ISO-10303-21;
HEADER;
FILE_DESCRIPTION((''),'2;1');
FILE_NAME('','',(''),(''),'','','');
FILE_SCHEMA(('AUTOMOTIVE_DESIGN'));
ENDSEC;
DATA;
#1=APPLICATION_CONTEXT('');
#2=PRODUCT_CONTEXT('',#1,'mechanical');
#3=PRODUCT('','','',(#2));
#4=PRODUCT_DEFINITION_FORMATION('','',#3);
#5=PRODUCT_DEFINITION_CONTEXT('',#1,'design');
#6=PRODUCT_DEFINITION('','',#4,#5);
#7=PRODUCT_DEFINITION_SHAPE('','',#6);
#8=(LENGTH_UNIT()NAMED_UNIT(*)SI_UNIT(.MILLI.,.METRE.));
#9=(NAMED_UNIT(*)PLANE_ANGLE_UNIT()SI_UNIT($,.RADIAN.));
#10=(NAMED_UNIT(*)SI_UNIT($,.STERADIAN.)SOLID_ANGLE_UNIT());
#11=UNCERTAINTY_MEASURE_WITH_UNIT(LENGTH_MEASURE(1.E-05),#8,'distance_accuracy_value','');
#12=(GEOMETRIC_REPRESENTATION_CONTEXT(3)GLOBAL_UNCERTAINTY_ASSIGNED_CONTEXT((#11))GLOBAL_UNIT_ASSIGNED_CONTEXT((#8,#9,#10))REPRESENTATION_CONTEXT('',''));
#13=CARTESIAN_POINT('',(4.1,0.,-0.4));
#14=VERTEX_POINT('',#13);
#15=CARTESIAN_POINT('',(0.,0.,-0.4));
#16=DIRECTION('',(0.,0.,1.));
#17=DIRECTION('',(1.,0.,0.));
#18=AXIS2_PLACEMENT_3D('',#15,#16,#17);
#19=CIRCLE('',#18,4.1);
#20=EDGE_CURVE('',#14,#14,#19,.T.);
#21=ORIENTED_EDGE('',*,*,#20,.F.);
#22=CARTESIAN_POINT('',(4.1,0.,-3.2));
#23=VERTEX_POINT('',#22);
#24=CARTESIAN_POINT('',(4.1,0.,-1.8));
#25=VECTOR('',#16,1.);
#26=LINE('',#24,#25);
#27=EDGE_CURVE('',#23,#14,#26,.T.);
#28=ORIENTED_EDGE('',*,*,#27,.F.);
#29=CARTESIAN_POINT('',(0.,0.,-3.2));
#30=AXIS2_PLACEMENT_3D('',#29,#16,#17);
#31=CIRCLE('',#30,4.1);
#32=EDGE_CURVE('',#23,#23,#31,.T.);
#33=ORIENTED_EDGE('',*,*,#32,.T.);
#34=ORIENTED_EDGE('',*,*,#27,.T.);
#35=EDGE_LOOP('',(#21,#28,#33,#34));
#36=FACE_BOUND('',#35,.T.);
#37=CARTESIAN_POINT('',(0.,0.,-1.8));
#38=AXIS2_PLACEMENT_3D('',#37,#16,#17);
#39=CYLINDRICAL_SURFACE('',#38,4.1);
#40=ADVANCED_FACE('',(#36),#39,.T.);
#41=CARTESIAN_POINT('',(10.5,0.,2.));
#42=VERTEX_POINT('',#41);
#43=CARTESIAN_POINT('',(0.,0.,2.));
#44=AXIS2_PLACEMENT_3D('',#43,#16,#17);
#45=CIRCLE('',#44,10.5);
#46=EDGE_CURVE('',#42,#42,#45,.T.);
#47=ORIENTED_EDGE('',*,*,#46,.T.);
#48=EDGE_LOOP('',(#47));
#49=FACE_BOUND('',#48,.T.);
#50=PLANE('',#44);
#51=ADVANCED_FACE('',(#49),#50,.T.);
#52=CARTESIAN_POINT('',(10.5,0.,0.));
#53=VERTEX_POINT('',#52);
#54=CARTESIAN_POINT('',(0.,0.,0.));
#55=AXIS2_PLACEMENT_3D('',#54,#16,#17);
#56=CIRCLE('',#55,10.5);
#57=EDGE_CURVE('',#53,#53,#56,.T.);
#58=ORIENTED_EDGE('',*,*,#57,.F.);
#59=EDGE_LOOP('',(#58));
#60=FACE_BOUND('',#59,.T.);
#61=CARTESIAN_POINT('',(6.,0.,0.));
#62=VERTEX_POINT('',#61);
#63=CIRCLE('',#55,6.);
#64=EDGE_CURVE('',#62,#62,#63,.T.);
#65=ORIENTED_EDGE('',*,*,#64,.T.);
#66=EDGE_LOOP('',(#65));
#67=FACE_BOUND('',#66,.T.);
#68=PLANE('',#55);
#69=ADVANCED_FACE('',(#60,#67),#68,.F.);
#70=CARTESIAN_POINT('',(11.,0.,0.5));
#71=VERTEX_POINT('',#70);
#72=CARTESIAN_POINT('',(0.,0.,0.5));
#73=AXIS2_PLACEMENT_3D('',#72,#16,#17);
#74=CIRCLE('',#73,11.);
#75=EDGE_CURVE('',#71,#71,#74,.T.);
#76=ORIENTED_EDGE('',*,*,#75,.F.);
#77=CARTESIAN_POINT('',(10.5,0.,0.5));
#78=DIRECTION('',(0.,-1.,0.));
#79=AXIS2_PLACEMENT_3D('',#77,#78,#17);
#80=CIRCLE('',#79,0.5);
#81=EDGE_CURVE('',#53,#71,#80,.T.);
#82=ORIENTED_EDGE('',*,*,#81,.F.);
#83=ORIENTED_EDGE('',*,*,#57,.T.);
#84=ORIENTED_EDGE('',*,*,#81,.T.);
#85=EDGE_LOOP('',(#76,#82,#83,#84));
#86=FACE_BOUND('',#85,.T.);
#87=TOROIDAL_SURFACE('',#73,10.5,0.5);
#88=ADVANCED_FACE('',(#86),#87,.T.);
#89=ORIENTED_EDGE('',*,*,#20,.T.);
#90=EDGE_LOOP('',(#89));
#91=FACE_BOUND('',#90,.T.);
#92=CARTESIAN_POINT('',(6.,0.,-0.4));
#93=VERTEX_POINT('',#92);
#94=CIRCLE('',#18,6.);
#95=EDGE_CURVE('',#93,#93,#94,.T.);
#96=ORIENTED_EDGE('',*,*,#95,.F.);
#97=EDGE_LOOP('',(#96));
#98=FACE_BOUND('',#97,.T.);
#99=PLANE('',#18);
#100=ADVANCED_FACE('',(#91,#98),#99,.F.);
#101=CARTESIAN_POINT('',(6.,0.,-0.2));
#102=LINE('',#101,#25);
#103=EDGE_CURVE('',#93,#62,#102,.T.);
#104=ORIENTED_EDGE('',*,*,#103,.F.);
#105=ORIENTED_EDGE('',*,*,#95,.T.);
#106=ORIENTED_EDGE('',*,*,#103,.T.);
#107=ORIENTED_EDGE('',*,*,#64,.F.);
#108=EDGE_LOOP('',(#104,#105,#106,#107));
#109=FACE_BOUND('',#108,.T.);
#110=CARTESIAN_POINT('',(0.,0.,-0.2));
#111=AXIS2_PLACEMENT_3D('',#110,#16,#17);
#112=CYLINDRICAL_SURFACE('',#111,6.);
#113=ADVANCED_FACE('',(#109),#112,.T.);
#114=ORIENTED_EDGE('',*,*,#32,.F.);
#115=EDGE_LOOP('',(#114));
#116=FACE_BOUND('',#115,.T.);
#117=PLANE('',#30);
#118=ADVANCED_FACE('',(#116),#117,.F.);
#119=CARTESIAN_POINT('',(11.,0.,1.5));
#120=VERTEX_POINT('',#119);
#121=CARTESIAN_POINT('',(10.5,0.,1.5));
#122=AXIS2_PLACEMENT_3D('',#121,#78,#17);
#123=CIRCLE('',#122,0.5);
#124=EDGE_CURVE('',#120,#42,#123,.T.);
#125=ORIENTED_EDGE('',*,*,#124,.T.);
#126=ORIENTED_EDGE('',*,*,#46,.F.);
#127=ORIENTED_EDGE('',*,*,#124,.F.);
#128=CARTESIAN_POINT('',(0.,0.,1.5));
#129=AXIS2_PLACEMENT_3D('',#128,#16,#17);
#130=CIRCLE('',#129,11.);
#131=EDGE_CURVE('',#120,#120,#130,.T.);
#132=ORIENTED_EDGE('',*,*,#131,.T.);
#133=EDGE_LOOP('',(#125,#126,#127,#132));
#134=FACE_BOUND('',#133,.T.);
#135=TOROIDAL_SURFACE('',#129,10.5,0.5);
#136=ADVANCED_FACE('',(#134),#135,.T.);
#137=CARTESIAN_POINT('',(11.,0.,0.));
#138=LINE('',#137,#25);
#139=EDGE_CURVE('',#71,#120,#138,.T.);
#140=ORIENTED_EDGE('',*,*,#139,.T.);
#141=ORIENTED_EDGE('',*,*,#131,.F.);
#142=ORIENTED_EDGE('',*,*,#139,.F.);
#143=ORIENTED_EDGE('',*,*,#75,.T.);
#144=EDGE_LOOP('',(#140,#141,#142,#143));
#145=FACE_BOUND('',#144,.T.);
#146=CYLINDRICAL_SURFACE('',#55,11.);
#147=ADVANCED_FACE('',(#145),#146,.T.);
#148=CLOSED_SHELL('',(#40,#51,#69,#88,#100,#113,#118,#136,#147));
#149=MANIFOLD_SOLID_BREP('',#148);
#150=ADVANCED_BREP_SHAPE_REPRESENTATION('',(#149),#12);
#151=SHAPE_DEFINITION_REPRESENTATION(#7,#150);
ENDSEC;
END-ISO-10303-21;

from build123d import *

# Parameters (mm, degrees)
F0_W   = 4.1
F0_H   = 0.4
F0_W_2 = 1.9
F0_H_2 = 2.8
F2_R   = 0.5


with BuildPart() as f1:
    # F0 (on Front) → F1 (revolve)
    with BuildSketch(Plane.XZ):
        Polygon((0, 2), (0, 0), (4.1, 0), (6, 0), (11, 0), (11, 2), align=None)
        with Locations((2.05, -0.2)):
            Rectangle(F0_W, F0_H)
        with Locations((5.05, -0.2)):
            Rectangle(F0_W_2, F0_H)
        with Locations((2.05, -1.8)):
            Rectangle(F0_W, F0_H_2)
    revolve(axis=Axis((0, 0, 1), (0, 0, 1)))

    # F2
    f2_edges = [f1.edges().sort_by_distance(p)[0] for p in [
        (-11, 0, 0),
        (-11, 0, 2),
    ]]
    fillet(f2_edges, radius=F2_R)


solid = f1.part
